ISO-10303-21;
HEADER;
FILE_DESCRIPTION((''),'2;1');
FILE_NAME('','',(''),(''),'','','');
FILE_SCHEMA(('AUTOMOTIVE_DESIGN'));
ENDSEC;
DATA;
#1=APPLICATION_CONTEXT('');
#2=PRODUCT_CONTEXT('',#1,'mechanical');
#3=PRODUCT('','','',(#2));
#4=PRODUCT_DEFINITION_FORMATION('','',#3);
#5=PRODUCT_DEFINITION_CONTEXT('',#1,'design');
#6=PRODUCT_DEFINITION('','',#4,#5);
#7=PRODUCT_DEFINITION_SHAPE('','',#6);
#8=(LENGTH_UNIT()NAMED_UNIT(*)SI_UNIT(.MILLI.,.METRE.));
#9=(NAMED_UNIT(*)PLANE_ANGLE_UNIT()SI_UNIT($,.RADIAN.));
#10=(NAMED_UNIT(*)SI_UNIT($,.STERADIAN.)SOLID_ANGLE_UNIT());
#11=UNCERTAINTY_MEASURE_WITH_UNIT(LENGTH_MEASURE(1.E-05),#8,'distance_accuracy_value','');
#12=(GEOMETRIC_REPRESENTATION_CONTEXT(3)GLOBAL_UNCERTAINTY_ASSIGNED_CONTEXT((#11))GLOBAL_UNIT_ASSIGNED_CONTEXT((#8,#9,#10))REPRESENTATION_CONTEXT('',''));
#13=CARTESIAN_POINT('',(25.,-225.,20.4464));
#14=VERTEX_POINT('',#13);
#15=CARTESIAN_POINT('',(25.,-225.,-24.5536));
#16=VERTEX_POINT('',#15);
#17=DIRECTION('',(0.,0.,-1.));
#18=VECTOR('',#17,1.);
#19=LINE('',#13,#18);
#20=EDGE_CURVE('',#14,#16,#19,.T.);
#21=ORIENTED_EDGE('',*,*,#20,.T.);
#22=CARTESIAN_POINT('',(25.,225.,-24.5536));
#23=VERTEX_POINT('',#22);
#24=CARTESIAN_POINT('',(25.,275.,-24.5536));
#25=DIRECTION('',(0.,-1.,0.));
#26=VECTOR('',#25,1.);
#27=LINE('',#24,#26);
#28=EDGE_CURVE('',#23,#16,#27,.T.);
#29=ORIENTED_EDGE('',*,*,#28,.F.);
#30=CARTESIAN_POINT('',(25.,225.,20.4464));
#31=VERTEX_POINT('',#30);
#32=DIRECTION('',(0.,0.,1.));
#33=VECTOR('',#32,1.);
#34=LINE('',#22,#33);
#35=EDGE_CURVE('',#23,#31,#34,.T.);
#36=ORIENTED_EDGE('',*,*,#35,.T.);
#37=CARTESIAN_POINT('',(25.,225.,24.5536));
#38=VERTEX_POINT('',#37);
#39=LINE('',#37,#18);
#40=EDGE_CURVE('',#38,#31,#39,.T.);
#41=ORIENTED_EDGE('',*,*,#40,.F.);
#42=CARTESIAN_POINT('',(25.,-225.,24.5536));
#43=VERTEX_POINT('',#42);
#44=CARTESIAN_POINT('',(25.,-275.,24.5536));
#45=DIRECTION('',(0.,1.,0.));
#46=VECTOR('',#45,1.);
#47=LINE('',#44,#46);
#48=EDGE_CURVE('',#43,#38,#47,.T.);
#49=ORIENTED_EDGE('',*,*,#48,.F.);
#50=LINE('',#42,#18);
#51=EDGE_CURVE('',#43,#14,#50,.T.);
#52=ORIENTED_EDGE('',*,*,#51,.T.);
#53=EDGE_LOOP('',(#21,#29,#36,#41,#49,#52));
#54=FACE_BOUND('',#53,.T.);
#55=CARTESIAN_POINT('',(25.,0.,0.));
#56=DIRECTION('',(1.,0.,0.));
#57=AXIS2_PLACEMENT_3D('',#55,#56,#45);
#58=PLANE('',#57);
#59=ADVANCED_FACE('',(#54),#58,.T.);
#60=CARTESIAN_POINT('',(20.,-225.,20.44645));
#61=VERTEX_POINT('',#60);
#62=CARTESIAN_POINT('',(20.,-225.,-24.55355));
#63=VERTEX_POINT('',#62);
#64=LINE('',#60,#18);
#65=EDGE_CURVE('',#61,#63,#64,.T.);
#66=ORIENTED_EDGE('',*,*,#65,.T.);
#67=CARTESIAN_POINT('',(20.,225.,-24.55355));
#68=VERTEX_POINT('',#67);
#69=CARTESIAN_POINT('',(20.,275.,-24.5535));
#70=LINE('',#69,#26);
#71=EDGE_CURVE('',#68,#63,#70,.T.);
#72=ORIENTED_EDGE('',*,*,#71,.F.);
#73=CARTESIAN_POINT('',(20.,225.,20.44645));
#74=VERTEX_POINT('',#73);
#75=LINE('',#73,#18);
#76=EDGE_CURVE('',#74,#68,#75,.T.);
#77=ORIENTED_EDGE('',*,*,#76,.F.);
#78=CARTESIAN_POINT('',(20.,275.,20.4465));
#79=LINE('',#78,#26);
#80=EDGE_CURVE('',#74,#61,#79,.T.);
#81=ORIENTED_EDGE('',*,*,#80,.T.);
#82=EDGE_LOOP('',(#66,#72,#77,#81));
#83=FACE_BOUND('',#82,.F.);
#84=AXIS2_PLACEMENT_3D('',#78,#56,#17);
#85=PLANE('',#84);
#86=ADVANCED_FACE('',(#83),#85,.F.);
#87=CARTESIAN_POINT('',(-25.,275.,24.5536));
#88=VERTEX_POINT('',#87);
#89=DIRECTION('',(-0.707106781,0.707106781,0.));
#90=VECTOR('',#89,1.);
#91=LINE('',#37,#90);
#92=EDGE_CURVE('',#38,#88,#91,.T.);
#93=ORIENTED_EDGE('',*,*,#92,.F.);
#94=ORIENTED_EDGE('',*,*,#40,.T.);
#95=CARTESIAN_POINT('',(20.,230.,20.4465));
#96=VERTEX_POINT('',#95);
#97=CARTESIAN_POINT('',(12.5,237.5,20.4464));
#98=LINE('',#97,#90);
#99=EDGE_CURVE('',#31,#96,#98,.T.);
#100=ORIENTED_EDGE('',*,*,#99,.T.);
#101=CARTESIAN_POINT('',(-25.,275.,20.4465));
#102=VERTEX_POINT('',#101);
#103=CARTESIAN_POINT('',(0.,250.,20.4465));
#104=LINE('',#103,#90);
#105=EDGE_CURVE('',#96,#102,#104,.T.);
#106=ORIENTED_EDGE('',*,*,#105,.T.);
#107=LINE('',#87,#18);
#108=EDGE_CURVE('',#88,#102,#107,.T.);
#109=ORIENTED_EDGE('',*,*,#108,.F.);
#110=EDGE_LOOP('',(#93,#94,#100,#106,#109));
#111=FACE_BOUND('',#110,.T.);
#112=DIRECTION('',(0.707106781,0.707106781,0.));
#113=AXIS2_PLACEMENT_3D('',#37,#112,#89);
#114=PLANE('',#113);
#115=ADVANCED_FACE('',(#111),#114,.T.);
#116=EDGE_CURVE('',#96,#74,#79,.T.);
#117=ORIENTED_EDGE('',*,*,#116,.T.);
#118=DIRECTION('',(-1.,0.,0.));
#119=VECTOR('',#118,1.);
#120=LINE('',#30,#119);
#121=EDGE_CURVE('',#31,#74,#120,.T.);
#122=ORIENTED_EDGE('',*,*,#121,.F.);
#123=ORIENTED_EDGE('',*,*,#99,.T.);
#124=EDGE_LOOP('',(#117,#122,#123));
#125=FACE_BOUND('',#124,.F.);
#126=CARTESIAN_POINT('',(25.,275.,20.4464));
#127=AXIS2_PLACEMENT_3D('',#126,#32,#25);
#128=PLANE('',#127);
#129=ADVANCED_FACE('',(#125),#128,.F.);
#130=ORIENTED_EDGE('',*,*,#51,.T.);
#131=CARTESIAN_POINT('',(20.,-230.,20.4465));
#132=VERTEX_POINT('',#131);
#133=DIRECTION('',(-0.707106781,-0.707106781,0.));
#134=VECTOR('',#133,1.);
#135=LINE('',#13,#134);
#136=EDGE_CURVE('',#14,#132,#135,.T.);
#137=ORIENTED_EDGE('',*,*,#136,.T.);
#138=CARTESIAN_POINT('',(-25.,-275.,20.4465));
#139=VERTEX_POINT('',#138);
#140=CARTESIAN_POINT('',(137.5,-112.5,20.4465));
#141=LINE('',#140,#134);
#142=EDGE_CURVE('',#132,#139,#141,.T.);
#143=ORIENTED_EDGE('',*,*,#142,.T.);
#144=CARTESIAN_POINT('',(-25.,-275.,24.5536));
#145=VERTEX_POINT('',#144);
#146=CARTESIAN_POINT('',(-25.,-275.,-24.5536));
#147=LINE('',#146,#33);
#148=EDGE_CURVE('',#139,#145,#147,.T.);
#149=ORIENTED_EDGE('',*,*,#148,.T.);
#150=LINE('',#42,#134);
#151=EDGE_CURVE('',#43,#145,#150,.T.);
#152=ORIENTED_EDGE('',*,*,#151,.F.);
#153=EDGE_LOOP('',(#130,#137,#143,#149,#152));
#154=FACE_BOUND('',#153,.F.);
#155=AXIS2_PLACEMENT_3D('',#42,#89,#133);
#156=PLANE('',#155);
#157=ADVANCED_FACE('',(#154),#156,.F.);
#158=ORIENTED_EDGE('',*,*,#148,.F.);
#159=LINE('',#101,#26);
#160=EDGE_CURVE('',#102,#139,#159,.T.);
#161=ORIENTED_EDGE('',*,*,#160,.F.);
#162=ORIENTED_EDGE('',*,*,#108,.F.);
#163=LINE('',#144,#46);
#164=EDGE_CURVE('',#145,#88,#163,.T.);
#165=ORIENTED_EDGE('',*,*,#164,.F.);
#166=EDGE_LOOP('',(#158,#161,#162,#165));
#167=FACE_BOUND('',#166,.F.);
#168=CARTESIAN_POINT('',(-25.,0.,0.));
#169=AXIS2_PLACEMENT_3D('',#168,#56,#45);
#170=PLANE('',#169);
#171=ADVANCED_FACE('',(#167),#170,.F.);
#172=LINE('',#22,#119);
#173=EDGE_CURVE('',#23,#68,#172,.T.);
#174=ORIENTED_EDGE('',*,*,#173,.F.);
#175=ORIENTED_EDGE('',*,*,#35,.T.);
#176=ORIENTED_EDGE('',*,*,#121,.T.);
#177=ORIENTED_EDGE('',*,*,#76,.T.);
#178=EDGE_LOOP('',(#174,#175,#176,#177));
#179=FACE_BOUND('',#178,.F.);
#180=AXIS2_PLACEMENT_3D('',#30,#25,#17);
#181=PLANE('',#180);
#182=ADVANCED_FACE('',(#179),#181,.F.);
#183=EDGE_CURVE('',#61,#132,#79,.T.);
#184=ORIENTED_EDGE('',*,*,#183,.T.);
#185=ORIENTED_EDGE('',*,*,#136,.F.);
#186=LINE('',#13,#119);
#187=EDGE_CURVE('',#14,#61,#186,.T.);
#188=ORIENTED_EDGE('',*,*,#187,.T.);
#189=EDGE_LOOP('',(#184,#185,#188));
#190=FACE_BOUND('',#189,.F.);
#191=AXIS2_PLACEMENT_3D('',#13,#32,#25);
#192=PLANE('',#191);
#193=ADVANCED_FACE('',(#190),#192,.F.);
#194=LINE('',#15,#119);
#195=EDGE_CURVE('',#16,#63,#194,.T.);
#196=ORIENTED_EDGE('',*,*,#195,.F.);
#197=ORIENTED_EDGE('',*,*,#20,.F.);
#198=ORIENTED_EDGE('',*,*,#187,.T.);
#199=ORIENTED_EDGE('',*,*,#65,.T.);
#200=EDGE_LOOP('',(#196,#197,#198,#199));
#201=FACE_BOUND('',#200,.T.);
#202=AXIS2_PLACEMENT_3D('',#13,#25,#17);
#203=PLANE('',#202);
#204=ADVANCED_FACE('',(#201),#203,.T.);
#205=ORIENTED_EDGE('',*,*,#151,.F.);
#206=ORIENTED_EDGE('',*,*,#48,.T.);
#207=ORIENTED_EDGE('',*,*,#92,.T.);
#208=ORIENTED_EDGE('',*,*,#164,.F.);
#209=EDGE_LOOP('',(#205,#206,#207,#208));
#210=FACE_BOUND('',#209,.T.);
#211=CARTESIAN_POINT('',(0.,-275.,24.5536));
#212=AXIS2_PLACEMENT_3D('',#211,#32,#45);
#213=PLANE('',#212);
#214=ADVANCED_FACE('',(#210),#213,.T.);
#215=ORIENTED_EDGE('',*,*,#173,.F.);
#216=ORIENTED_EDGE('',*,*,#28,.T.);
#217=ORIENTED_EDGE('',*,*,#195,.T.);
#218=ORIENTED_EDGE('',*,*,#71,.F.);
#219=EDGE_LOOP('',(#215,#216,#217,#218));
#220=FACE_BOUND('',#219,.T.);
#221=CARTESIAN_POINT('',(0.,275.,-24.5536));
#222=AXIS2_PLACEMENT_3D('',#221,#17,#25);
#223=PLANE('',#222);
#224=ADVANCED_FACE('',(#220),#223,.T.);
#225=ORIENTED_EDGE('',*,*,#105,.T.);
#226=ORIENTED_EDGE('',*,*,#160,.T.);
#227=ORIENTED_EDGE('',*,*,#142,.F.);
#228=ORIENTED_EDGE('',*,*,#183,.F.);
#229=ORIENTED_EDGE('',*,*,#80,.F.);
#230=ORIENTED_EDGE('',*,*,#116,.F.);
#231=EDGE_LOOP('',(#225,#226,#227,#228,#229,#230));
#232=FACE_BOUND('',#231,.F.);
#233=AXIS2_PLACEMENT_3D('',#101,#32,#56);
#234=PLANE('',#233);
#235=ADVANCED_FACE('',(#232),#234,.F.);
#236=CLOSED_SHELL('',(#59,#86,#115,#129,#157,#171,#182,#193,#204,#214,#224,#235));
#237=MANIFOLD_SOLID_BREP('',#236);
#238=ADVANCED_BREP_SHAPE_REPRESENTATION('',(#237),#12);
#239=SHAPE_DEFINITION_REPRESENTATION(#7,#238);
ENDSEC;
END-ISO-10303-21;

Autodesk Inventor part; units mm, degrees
ref_plane "YZ Plane" through (0, 0, 0) normal (1, 0, 0) x (0, 1, 0)
ref_plane "XZ Plane" through (0, 0, 0) normal (0, 1, 0) x (-1, 0, 0)
ref_plane "XY Plane" through (0, 0, 0) normal (0, 0, 1) x (1, 0, 0)
sketch "Sketch1" plane through (0, 0, 0) normal (1, 0, 0) x (0, 1, 0)
  line L0 (-275, 24.5536) -> (275, 24.5536)
  line L1 (275, 24.5536) -> (275, -24.5536)
  line L2 (275, -24.5536) -> (-275, -24.5536)
  line L3 (-275, -24.5536) -> (-275, 24.5536)
  point P0 (0, 0)
  dimension "d18" = 550
extrude "Extrusion1" add sketch "Sketch1" along normal mid plane 50
sketch "Sketch5" plane through (-25, 275, 24.5536) normal (0, 1, 0) x (1, 0, 0)
  line L0 (0, 49.1071) -> (0, 0) projected
  line L1 (0, 49.1071) -> (0, 4.1071)
  line L2 (0, 4.1071) -> (45, 4.1071)
  line L3 (45, 4.1071) -> (45, 49.1071)
  line L4 (0, 49.1071) -> (50, 49.1071) projected
  line L5 (0, 49.1071) -> (45, 49.1071)
  point P0 (25, 24.5536)
extrude "Extrusion5" cut sketch "Sketch5" against normal through all
sketch "Sketch6" plane through (25, 0, 0) normal (1, 0, 0) x (0, 0, -1)
  line L0 (24.5536, -275) -> (24.5536, 275) projected
  line L1 (-20.4464, 275) -> (-20.4464, -275) projected
  line L2 (24.5536, 275) -> (-20.4464, 275)
  line L3 (-20.4464, 275) -> (-20.4464, 225)
  line L4 (-20.4464, 225) -> (24.5536, 225)
  line L5 (24.5536, 225) -> (24.5536, 275)
  line L6 (-24.5536, -275) -> (24.5536, -275) projected
  line L7 (24.5536, -275) -> (-20.4464, -275)
  line L8 (-20.4464, -275) -> (-20.4464, -225)
  line L9 (-20.4464, -225) -> (24.5536, -225)
  line L10 (24.5536, -225) -> (24.5536, -275)
  point P0 (0, 0)
  dimension "d23" = 50
  dimension "d24" = 50
extrude "Extrusion6" cut sketch "Sketch6" against normal blind 10 contours L6 L1 L9 L0 | L4 L1 L2 L0
sketch "Sketch7" plane through (-25, -275, 24.5536) normal (0, 0, 1) x (1, 0, 0)
  line L0 (50, 50) -> (50, 500) projected
  line L1 (0, 0) -> (0, 550) projected
  line L2 (50, 500) -> (0, 550)
  line L3 (0, 550) -> (50, 550)
  line L4 (50, 550) -> (50, 500)
  line L5 (50, 50) -> (0, 0)
  line L6 (0, 0) -> (50, 0)
  line L7 (50, 0) -> (50, 50)
  point P0 (25, 275)
extrude "Extrusion7" cut sketch "Sketch7" against normal blind 5 contours L7 L6 L5 | L2 L3 L4
properties part number "angle4"
